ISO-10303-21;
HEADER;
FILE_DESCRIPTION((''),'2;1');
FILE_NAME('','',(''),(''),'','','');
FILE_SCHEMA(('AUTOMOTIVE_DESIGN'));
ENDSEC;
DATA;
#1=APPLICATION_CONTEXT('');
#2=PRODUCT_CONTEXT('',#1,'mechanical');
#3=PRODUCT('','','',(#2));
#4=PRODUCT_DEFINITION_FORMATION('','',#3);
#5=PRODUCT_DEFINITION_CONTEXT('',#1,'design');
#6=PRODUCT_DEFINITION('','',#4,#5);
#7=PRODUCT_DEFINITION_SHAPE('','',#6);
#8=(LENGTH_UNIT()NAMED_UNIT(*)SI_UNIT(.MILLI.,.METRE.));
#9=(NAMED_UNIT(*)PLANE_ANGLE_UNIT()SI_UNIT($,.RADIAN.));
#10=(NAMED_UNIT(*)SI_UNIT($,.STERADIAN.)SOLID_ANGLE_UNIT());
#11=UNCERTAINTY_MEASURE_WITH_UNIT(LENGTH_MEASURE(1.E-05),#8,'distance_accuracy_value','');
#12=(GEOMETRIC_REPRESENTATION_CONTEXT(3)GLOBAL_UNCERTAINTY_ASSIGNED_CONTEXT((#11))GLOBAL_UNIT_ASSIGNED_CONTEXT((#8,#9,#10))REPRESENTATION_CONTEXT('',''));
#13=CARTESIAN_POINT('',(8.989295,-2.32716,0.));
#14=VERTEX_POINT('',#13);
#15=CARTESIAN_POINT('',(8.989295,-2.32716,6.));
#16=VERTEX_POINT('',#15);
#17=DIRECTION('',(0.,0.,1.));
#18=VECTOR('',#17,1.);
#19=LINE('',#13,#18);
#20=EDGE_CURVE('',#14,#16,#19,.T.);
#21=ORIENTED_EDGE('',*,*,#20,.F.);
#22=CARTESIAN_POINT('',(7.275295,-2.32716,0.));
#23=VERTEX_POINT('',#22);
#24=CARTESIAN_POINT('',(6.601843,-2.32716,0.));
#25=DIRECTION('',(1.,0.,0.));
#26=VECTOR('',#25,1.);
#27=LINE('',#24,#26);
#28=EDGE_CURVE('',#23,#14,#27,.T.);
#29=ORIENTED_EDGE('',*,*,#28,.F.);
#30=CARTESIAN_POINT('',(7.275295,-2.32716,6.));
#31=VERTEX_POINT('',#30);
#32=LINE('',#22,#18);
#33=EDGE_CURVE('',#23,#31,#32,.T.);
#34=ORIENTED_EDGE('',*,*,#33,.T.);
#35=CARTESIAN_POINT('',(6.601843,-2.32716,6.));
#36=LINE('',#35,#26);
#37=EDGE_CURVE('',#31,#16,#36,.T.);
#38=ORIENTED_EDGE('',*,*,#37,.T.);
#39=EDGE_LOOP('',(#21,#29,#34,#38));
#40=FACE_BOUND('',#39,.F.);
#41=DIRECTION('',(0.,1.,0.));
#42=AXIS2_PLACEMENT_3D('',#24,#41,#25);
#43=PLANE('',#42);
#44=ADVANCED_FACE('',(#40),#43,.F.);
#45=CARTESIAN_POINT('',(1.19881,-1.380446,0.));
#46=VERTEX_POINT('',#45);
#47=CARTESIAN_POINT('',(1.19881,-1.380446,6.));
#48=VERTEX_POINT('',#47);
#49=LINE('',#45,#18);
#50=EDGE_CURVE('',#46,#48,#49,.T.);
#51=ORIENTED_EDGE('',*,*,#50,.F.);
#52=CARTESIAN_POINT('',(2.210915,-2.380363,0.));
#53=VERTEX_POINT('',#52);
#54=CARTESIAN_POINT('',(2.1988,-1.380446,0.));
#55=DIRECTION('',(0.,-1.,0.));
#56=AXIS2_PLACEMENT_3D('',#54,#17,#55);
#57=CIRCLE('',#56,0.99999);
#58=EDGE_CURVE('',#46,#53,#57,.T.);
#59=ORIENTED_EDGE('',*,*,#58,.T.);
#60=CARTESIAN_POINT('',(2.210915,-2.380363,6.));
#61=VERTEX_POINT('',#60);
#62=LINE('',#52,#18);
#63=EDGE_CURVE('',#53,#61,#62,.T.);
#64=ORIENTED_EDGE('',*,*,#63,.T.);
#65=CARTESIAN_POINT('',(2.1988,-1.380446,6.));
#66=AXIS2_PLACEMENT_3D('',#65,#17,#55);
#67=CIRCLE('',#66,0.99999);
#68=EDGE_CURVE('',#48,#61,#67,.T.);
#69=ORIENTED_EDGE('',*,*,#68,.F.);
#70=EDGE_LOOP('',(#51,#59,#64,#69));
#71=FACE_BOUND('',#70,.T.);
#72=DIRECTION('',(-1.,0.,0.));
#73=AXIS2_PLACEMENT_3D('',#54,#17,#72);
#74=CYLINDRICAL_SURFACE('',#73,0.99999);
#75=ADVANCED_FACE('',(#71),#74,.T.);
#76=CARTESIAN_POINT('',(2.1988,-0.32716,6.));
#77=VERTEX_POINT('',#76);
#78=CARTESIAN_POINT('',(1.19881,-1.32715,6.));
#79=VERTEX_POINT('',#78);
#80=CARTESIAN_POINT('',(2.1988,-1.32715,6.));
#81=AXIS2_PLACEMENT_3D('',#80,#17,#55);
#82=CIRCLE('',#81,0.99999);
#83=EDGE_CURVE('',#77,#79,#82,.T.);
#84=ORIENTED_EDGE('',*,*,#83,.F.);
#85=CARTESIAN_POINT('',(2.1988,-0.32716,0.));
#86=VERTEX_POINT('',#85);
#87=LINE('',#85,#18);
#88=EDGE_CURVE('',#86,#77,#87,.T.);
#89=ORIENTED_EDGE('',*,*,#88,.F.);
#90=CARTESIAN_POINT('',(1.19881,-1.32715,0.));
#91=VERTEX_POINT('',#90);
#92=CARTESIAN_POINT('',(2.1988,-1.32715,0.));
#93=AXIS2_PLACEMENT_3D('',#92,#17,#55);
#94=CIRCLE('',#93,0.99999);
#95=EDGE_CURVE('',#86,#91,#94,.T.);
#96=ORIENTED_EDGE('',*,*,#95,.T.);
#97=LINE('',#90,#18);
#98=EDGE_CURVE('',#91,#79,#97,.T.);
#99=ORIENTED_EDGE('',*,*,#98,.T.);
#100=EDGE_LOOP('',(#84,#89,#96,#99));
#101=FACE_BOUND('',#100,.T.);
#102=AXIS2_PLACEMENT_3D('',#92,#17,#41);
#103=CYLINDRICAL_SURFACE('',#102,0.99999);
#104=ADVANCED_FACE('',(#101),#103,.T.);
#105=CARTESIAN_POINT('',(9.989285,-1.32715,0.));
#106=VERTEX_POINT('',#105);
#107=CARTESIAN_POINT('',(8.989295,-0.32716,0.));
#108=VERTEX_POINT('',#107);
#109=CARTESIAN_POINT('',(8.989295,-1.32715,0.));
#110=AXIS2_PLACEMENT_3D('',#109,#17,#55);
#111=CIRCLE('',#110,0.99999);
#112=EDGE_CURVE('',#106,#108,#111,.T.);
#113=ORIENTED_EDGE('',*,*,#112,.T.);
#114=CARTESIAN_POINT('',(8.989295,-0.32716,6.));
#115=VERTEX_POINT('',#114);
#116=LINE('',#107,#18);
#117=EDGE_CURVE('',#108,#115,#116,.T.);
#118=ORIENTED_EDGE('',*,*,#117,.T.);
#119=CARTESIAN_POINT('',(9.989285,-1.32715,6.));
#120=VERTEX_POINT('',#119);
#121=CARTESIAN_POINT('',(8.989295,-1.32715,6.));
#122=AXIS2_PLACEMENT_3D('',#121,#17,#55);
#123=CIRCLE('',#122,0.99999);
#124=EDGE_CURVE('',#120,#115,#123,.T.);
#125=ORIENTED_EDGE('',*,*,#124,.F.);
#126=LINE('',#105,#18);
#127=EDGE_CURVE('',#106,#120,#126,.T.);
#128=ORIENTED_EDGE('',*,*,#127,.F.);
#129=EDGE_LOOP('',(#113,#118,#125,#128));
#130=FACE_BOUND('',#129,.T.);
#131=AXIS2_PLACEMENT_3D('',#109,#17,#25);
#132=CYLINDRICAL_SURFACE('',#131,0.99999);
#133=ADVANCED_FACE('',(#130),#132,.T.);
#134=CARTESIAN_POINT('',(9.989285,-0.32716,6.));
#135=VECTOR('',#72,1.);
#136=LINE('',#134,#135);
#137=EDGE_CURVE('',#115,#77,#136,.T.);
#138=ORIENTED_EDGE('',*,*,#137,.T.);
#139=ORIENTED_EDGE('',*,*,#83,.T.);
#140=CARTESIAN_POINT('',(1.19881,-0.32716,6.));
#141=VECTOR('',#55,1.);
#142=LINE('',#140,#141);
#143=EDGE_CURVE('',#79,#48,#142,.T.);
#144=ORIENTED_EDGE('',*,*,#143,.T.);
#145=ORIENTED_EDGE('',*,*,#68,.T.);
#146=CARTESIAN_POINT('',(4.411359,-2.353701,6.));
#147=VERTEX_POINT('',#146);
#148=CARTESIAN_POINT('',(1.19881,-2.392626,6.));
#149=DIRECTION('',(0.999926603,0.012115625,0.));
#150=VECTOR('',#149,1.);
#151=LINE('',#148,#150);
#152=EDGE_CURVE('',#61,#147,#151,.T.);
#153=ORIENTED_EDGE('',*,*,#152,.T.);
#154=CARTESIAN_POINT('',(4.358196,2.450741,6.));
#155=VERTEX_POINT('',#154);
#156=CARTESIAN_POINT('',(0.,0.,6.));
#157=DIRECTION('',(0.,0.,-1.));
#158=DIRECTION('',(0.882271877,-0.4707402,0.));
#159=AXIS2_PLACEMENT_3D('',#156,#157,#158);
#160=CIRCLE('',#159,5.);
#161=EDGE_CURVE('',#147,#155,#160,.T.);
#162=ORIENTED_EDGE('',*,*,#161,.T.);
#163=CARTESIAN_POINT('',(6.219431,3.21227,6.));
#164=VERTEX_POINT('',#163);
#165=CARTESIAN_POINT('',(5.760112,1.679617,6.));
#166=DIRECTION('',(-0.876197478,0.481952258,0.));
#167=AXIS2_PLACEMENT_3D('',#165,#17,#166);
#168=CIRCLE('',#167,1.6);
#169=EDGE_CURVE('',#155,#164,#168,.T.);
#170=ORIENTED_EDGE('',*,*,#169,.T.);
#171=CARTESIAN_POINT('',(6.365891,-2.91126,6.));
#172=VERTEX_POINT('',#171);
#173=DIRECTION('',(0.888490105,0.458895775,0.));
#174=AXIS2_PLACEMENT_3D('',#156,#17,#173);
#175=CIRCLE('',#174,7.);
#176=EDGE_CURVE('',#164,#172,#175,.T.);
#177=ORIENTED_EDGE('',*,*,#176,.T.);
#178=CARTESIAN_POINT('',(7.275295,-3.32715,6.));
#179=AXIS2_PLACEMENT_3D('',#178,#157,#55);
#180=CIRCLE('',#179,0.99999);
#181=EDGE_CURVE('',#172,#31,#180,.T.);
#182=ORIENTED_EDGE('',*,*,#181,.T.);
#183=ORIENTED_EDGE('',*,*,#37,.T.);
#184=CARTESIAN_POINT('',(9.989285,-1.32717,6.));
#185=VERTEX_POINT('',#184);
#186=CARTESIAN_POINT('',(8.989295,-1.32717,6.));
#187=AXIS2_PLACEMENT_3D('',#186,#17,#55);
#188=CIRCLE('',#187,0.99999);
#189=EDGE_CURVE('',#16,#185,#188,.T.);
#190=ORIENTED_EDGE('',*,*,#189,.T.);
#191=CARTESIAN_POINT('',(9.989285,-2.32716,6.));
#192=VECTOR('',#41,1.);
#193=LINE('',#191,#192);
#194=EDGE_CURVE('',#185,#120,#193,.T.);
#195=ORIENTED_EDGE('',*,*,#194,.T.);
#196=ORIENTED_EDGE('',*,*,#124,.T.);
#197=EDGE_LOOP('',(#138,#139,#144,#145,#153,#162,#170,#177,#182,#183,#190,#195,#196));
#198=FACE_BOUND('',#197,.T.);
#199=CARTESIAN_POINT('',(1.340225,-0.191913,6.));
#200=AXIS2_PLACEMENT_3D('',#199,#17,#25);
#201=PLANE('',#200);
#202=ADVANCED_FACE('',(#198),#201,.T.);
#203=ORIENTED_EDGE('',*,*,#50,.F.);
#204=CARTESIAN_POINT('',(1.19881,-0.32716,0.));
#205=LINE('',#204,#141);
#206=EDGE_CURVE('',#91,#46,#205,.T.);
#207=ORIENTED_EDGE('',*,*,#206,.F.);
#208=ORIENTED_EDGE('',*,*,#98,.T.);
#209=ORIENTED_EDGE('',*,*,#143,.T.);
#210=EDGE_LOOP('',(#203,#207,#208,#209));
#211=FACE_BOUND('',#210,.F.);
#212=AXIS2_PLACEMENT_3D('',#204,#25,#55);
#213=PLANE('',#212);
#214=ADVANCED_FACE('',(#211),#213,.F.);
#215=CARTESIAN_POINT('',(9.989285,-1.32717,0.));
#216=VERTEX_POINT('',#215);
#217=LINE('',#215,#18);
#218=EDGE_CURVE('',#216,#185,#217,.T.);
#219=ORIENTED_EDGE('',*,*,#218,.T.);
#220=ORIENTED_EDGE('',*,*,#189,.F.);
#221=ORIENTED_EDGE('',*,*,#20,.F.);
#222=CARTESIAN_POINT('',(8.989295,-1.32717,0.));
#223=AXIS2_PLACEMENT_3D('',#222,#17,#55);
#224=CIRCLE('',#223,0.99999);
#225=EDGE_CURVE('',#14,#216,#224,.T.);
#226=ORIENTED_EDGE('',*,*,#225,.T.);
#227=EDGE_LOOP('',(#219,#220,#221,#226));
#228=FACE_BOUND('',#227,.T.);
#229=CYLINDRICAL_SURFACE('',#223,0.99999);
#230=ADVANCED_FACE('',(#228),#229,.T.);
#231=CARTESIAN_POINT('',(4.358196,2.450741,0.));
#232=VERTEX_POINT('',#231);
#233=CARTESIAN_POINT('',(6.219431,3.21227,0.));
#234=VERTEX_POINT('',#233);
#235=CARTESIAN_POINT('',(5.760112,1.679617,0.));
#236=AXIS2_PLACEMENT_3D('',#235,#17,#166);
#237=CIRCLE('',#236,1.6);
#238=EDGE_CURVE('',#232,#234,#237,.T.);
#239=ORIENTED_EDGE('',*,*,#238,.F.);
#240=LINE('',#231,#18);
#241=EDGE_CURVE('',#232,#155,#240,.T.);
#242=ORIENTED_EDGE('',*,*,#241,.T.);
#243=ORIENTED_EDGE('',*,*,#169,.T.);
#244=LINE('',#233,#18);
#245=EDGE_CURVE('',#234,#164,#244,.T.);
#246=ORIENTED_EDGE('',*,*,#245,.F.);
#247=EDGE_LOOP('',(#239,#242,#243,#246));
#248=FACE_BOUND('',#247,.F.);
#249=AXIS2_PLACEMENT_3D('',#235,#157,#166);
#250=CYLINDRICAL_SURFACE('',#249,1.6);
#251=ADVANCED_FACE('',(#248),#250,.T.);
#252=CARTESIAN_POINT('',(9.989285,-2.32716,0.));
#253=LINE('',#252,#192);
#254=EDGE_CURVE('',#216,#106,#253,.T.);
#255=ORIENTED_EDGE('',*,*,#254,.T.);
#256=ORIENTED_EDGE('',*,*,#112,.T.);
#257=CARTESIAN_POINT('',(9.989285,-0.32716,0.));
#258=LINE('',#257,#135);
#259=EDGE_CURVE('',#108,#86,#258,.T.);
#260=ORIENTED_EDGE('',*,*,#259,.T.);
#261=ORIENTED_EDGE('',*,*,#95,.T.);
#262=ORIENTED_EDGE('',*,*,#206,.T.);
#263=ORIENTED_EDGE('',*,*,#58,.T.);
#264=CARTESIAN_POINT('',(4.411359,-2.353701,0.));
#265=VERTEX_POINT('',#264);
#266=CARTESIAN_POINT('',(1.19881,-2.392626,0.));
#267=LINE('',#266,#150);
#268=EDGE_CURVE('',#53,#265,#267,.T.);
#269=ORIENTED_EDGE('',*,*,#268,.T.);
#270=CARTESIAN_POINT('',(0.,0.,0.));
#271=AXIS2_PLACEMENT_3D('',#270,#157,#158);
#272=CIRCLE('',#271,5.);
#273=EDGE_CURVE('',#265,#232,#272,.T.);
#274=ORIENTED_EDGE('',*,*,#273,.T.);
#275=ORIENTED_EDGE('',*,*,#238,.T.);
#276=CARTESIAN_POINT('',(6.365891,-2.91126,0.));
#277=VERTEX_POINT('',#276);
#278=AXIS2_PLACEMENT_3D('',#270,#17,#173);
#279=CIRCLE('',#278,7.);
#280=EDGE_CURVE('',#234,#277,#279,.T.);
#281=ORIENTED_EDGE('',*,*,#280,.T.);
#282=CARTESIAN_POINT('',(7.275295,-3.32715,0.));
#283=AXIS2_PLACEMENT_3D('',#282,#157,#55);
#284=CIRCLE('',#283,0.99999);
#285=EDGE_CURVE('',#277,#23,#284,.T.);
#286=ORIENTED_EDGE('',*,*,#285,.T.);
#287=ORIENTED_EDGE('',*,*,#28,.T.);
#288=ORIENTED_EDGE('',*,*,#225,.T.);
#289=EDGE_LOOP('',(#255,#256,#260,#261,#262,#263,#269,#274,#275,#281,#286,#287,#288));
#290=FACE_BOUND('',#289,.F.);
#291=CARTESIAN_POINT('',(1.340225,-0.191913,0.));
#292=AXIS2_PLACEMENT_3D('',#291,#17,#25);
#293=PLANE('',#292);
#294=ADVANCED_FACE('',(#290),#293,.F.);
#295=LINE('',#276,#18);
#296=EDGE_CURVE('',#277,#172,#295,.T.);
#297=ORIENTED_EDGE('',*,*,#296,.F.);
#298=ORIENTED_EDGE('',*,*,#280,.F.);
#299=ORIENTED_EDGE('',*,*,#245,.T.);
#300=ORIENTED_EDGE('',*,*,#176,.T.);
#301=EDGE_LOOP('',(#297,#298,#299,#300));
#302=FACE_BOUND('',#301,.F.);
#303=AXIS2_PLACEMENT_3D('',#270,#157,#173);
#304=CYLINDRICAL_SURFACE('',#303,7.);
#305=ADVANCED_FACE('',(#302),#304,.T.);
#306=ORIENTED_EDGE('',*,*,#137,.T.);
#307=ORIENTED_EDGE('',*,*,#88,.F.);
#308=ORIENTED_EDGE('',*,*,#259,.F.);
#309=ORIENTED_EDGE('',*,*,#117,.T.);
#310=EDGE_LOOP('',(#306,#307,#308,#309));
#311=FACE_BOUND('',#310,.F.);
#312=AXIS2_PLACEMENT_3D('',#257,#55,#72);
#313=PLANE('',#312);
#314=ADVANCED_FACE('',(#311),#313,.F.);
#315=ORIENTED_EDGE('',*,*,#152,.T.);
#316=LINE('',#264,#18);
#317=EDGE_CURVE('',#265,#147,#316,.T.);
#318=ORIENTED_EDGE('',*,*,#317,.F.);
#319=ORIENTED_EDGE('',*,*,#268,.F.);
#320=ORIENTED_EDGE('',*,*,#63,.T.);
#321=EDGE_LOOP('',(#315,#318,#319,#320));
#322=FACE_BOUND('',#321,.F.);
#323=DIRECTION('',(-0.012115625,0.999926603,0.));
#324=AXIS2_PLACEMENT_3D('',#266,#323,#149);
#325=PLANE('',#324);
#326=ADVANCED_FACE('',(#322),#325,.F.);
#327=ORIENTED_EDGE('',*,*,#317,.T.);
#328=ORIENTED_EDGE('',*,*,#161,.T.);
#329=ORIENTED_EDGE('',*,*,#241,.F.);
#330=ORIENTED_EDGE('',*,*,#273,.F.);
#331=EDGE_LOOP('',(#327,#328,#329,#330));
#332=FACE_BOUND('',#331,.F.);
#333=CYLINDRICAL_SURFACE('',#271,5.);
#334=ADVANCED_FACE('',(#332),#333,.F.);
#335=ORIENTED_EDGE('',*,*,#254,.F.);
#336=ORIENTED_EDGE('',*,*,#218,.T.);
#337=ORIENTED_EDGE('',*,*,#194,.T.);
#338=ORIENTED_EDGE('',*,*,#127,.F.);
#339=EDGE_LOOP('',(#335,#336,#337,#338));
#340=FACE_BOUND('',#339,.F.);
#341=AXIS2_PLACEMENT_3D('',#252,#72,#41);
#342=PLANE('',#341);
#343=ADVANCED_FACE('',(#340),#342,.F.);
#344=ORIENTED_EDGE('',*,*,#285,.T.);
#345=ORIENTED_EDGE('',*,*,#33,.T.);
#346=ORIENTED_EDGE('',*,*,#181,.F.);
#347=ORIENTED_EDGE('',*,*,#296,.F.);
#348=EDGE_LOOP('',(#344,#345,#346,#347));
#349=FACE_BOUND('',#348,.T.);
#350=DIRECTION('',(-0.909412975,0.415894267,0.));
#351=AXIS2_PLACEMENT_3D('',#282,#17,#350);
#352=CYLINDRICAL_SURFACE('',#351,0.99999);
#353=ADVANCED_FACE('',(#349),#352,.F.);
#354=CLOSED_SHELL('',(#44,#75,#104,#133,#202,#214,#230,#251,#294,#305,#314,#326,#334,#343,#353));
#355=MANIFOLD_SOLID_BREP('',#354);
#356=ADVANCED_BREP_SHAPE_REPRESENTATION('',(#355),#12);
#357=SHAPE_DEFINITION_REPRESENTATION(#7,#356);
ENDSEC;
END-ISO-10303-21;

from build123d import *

# Parameters (mm, degrees)
F1_DEPTH = 6
F2_R     = 0.99999


# Not quite as in the source:
# - a fillet or chamfer is up to 0.001 mm smaller than in the source, because OpenCascade refuses the exact size


with BuildPart() as f1:
    # F0 (on Top) → F1 (new body)
    with BuildSketch(Plane.XY):
        with BuildLine():
            ThreePointArc((4.411359383, -2.3537009993), (-4.9996939131, -0.0553242752), (4.3581956764, 2.4507407954))
            ThreePointArc((4.3581956764, 2.4507407954), (6.3660027692, 0.1987741987), (6.2194307383, 3.2122704263))
            ThreePointArc((6.2194307383, 3.2122704263), (-6.9833792075, -0.482094228), (6.6018426545, -2.3271599784))
            Line((6.6018426545, -2.3271599784), (9.9892851541, -2.3271599784))
            Line((9.9892851541, -2.3271599784), (9.9892851541, -0.3271599784))
            Line((9.9892851541, -0.3271599784), (4.9892851541, -0.3271599784))
            Line((4.9892851541, -0.3271599784), (1.1988097103, -0.3271599784))
            Line((1.1988097103, -0.3271599784), (1.1988097103, -2.3926259018))
            Line((1.1988097103, -2.3926259018), (4.411359383, -2.3537009993))
        make_face()
    extrude(amount=F1_DEPTH)

    # F2 (radius 1 in the source; OpenCascade refuses exactly that, so slightly less here)
    f2_edges = [f1.edges().sort_by_distance(p)[0] for p in [
        (9.989285, -0.32716, 3),
        (1.19881, -0.32716, 3),
        (1.19881, -2.392626, 3),
        (9.989285, -2.32716, 3),
        (6.601843, -2.32716, 3),
    ]]
    fillet(f2_edges, radius=F2_R)


solid = f1.part
